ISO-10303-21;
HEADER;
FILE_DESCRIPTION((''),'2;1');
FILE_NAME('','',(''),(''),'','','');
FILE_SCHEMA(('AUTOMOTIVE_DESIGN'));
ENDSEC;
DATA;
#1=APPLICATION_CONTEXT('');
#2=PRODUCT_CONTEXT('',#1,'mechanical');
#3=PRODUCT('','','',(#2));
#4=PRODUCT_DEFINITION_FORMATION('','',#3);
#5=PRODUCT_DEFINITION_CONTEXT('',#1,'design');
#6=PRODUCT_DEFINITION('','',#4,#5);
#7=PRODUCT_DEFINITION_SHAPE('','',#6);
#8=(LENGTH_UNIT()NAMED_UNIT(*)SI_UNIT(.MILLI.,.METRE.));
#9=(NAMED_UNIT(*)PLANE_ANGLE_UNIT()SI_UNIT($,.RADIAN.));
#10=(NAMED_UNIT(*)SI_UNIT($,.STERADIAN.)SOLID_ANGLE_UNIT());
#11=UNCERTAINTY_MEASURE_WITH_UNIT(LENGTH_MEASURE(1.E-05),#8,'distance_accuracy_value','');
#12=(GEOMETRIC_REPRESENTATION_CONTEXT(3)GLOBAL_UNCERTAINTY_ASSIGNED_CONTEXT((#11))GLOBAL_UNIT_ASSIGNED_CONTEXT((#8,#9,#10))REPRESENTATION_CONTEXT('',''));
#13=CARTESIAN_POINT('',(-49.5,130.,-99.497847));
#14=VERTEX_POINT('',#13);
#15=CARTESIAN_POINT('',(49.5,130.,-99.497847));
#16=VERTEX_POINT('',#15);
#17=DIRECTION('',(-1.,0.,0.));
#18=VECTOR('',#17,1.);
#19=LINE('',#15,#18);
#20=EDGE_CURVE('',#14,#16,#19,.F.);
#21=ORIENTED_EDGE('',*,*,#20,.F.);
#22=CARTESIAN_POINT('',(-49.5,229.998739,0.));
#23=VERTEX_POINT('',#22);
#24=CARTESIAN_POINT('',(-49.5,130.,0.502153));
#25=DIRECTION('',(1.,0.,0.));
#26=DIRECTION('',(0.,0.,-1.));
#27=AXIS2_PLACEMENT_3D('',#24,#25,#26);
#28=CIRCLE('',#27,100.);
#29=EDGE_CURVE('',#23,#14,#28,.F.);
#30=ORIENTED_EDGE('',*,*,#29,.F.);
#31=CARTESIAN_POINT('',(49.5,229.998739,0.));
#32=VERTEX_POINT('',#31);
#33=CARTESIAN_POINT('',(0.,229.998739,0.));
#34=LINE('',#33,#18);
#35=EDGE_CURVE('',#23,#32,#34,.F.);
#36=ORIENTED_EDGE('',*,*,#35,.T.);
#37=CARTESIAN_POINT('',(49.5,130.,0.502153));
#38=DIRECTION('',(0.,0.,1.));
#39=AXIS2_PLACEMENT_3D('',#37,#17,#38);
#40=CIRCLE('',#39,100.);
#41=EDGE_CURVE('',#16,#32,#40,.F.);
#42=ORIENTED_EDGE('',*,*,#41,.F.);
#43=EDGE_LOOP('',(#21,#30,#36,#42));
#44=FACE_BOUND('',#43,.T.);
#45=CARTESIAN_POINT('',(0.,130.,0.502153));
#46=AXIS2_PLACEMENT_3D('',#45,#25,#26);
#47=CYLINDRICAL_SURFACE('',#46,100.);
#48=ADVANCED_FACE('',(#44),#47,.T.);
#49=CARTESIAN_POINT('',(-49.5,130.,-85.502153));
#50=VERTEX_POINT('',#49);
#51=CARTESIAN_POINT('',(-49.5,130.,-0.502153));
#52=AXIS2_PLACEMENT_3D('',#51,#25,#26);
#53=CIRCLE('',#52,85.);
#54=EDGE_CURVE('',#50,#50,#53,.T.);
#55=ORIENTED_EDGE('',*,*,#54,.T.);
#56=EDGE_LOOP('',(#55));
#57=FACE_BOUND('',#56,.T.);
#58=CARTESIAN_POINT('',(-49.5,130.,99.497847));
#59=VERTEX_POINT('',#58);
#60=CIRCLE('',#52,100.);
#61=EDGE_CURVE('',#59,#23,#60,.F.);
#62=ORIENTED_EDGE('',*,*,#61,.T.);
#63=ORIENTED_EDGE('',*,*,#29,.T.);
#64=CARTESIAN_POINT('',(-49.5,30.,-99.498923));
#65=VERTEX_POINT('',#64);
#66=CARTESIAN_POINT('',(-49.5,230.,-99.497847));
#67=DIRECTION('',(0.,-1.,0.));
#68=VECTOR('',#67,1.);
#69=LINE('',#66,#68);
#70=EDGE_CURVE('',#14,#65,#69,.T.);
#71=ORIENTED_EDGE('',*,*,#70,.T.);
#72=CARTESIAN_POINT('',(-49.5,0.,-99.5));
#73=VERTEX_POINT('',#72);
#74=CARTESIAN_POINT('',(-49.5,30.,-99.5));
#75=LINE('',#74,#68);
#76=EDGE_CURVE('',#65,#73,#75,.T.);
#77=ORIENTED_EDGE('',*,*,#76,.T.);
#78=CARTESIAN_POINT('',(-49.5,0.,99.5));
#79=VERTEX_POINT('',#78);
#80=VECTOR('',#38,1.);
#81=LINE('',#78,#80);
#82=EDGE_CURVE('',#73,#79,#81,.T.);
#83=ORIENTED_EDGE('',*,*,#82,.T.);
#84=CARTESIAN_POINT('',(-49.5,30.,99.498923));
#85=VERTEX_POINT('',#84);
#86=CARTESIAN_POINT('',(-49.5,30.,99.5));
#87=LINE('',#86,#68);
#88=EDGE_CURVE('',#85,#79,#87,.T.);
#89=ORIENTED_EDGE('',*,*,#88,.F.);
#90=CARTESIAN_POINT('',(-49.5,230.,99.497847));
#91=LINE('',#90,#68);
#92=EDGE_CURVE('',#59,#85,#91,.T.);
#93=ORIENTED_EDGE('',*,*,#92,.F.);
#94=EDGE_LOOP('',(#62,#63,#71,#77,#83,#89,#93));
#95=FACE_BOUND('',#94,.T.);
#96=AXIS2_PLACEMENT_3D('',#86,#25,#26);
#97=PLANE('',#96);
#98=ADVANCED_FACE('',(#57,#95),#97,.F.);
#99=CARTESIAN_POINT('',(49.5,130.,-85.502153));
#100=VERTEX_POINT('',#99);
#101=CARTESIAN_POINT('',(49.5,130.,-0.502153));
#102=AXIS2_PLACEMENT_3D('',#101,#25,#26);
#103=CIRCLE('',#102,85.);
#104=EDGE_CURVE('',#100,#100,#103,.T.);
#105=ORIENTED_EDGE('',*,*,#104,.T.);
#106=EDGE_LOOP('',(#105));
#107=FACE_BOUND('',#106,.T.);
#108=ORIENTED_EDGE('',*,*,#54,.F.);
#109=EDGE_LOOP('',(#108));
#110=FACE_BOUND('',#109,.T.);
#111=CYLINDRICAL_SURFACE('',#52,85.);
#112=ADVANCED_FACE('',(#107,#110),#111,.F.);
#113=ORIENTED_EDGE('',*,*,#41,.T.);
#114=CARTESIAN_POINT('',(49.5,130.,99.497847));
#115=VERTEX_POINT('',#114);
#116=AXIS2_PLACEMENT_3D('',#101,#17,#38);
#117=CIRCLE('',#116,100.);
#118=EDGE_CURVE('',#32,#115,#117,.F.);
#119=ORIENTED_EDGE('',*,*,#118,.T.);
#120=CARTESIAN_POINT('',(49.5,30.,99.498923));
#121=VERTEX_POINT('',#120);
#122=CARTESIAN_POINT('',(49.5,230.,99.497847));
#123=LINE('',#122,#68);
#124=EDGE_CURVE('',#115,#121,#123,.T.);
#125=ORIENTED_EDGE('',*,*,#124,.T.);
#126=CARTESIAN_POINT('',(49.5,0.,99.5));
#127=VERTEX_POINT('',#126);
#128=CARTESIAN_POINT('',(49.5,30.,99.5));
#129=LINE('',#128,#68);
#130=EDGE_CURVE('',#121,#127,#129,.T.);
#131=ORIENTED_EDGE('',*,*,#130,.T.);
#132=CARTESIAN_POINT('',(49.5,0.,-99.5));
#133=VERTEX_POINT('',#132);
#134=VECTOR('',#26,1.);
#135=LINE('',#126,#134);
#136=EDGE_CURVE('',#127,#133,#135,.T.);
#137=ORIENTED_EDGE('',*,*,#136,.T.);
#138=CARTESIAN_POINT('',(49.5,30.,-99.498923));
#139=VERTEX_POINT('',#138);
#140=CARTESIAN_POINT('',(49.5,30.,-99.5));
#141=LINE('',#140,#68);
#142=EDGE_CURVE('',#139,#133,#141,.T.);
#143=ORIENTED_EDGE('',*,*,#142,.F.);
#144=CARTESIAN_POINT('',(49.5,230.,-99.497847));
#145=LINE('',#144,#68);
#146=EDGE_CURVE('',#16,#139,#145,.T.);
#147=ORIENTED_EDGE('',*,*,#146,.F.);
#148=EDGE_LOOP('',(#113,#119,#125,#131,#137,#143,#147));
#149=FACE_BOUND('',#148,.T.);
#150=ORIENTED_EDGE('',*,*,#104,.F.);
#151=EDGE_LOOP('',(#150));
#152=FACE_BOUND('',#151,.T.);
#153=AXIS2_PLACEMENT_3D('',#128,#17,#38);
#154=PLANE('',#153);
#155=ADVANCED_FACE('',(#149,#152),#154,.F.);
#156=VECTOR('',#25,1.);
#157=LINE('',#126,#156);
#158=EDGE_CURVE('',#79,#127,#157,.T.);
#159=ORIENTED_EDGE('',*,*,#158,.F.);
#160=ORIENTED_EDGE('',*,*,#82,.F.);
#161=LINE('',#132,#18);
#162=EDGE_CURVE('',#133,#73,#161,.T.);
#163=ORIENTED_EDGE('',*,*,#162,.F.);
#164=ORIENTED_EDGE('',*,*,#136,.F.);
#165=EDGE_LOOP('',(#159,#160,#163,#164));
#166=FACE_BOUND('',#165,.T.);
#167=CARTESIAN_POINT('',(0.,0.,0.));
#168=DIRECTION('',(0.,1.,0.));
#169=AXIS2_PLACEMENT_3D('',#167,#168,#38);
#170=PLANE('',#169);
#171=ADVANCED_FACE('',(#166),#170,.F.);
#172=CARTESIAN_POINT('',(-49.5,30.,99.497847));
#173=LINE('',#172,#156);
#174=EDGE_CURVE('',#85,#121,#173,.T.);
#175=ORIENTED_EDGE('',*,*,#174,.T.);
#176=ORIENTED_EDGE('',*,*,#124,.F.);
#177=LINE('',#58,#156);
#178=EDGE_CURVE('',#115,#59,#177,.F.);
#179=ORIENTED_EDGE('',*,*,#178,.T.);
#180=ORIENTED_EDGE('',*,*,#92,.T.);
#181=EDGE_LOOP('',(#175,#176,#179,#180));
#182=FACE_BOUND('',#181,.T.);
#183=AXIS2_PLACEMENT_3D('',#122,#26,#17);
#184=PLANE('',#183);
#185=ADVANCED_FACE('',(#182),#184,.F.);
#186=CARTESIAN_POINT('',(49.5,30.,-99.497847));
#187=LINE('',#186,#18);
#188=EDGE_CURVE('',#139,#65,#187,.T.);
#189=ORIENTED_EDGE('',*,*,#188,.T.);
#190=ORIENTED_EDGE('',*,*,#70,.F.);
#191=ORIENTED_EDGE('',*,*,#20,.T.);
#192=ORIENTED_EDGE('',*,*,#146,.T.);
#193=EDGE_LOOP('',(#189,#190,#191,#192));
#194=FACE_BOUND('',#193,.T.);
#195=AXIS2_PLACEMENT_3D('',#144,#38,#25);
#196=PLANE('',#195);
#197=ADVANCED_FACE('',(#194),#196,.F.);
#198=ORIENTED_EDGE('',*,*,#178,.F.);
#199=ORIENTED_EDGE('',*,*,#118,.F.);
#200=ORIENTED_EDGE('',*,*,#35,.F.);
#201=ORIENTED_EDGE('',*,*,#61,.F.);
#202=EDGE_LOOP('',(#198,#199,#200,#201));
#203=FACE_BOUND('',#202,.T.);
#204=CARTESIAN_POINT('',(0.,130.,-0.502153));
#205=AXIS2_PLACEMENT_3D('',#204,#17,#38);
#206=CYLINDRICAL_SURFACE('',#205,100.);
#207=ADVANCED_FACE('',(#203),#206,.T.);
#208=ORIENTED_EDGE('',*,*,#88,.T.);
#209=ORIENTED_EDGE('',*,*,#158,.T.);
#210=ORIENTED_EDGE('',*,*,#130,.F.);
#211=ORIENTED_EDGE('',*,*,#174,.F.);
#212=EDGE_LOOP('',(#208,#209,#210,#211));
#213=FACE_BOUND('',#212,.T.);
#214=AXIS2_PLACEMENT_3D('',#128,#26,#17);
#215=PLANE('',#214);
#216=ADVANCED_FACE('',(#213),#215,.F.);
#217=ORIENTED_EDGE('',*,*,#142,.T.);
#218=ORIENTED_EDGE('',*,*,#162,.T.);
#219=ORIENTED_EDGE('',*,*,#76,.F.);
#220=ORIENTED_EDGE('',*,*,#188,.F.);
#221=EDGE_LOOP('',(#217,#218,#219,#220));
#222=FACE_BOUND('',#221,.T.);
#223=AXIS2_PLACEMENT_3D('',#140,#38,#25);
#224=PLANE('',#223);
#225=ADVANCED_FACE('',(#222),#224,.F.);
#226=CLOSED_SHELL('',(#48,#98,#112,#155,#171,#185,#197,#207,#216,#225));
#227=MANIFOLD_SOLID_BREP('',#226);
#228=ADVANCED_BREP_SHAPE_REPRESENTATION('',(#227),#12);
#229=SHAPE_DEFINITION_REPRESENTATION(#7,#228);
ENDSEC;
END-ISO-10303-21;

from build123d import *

# Parameters (mm, degrees)
SKETCH1_W           = 99
SKETCH1_H           = 199
BOSS_EXTRUDE1_DEPTH = 30
SKETCH2_W           = 99
SKETCH2_H           = 198.99569364
BOSS_EXTRUDE2_DEPTH = 200
FILLET1_R           = 100
SKETCH3_R           = 85
CUT_EXTRUDE1_DEPTH  = 99


with BuildPart() as part:
    # Sketch1 → Boss-Extrude1 (new body)
    with BuildSketch(Plane(origin=(0, 0, 0), x_dir=(1, 0, 0), z_dir=(0, 1, 0))):
        Rectangle(SKETCH1_W, SKETCH1_H)
    extrude(amount=BOSS_EXTRUDE1_DEPTH)

    # Sketch2 → Boss-Extrude2 (add)
    with BuildSketch(Plane(origin=(0, 30, 0), x_dir=(1, 0, 0), z_dir=(0, 1, 0))):
        Rectangle(SKETCH2_W, SKETCH2_H)
    extrude(amount=BOSS_EXTRUDE2_DEPTH)

    # Fillet1
    # the kernel refuses this fillet: 100 mm, written as the material it takes off along each edge
    with BuildSketch(Plane(origin=(-299.5, 230, -99.49784682), x_dir=(0, -1, 0), z_dir=(1, 0, 0)), Plane(origin=(299.5, 230, 99.49784682), x_dir=(0, -1, 0), z_dir=(-1, 0, 0))) as fillet1_piece_1:
        with BuildLine():
            CenterArc((FILLET1_R, -FILLET1_R), FILLET1_R, 90, 90)
            Line((0, -FILLET1_R), (0, 0))
            Line((0, 0), (FILLET1_R, 0))
        make_face()
    extrude(amount=599, mode=Mode.SUBTRACT)

    # Sketch3 → Cut-Extrude1 (cut)
    with BuildSketch(Plane(origin=(49.5, 0, 0), x_dir=(0, 0, -1), z_dir=(1, 0, 0))):
        with Locations((0.50215318, 130)):
            Circle(SKETCH3_R)
    extrude(amount=-CUT_EXTRUDE1_DEPTH, mode=Mode.SUBTRACT)


solid = part.part
